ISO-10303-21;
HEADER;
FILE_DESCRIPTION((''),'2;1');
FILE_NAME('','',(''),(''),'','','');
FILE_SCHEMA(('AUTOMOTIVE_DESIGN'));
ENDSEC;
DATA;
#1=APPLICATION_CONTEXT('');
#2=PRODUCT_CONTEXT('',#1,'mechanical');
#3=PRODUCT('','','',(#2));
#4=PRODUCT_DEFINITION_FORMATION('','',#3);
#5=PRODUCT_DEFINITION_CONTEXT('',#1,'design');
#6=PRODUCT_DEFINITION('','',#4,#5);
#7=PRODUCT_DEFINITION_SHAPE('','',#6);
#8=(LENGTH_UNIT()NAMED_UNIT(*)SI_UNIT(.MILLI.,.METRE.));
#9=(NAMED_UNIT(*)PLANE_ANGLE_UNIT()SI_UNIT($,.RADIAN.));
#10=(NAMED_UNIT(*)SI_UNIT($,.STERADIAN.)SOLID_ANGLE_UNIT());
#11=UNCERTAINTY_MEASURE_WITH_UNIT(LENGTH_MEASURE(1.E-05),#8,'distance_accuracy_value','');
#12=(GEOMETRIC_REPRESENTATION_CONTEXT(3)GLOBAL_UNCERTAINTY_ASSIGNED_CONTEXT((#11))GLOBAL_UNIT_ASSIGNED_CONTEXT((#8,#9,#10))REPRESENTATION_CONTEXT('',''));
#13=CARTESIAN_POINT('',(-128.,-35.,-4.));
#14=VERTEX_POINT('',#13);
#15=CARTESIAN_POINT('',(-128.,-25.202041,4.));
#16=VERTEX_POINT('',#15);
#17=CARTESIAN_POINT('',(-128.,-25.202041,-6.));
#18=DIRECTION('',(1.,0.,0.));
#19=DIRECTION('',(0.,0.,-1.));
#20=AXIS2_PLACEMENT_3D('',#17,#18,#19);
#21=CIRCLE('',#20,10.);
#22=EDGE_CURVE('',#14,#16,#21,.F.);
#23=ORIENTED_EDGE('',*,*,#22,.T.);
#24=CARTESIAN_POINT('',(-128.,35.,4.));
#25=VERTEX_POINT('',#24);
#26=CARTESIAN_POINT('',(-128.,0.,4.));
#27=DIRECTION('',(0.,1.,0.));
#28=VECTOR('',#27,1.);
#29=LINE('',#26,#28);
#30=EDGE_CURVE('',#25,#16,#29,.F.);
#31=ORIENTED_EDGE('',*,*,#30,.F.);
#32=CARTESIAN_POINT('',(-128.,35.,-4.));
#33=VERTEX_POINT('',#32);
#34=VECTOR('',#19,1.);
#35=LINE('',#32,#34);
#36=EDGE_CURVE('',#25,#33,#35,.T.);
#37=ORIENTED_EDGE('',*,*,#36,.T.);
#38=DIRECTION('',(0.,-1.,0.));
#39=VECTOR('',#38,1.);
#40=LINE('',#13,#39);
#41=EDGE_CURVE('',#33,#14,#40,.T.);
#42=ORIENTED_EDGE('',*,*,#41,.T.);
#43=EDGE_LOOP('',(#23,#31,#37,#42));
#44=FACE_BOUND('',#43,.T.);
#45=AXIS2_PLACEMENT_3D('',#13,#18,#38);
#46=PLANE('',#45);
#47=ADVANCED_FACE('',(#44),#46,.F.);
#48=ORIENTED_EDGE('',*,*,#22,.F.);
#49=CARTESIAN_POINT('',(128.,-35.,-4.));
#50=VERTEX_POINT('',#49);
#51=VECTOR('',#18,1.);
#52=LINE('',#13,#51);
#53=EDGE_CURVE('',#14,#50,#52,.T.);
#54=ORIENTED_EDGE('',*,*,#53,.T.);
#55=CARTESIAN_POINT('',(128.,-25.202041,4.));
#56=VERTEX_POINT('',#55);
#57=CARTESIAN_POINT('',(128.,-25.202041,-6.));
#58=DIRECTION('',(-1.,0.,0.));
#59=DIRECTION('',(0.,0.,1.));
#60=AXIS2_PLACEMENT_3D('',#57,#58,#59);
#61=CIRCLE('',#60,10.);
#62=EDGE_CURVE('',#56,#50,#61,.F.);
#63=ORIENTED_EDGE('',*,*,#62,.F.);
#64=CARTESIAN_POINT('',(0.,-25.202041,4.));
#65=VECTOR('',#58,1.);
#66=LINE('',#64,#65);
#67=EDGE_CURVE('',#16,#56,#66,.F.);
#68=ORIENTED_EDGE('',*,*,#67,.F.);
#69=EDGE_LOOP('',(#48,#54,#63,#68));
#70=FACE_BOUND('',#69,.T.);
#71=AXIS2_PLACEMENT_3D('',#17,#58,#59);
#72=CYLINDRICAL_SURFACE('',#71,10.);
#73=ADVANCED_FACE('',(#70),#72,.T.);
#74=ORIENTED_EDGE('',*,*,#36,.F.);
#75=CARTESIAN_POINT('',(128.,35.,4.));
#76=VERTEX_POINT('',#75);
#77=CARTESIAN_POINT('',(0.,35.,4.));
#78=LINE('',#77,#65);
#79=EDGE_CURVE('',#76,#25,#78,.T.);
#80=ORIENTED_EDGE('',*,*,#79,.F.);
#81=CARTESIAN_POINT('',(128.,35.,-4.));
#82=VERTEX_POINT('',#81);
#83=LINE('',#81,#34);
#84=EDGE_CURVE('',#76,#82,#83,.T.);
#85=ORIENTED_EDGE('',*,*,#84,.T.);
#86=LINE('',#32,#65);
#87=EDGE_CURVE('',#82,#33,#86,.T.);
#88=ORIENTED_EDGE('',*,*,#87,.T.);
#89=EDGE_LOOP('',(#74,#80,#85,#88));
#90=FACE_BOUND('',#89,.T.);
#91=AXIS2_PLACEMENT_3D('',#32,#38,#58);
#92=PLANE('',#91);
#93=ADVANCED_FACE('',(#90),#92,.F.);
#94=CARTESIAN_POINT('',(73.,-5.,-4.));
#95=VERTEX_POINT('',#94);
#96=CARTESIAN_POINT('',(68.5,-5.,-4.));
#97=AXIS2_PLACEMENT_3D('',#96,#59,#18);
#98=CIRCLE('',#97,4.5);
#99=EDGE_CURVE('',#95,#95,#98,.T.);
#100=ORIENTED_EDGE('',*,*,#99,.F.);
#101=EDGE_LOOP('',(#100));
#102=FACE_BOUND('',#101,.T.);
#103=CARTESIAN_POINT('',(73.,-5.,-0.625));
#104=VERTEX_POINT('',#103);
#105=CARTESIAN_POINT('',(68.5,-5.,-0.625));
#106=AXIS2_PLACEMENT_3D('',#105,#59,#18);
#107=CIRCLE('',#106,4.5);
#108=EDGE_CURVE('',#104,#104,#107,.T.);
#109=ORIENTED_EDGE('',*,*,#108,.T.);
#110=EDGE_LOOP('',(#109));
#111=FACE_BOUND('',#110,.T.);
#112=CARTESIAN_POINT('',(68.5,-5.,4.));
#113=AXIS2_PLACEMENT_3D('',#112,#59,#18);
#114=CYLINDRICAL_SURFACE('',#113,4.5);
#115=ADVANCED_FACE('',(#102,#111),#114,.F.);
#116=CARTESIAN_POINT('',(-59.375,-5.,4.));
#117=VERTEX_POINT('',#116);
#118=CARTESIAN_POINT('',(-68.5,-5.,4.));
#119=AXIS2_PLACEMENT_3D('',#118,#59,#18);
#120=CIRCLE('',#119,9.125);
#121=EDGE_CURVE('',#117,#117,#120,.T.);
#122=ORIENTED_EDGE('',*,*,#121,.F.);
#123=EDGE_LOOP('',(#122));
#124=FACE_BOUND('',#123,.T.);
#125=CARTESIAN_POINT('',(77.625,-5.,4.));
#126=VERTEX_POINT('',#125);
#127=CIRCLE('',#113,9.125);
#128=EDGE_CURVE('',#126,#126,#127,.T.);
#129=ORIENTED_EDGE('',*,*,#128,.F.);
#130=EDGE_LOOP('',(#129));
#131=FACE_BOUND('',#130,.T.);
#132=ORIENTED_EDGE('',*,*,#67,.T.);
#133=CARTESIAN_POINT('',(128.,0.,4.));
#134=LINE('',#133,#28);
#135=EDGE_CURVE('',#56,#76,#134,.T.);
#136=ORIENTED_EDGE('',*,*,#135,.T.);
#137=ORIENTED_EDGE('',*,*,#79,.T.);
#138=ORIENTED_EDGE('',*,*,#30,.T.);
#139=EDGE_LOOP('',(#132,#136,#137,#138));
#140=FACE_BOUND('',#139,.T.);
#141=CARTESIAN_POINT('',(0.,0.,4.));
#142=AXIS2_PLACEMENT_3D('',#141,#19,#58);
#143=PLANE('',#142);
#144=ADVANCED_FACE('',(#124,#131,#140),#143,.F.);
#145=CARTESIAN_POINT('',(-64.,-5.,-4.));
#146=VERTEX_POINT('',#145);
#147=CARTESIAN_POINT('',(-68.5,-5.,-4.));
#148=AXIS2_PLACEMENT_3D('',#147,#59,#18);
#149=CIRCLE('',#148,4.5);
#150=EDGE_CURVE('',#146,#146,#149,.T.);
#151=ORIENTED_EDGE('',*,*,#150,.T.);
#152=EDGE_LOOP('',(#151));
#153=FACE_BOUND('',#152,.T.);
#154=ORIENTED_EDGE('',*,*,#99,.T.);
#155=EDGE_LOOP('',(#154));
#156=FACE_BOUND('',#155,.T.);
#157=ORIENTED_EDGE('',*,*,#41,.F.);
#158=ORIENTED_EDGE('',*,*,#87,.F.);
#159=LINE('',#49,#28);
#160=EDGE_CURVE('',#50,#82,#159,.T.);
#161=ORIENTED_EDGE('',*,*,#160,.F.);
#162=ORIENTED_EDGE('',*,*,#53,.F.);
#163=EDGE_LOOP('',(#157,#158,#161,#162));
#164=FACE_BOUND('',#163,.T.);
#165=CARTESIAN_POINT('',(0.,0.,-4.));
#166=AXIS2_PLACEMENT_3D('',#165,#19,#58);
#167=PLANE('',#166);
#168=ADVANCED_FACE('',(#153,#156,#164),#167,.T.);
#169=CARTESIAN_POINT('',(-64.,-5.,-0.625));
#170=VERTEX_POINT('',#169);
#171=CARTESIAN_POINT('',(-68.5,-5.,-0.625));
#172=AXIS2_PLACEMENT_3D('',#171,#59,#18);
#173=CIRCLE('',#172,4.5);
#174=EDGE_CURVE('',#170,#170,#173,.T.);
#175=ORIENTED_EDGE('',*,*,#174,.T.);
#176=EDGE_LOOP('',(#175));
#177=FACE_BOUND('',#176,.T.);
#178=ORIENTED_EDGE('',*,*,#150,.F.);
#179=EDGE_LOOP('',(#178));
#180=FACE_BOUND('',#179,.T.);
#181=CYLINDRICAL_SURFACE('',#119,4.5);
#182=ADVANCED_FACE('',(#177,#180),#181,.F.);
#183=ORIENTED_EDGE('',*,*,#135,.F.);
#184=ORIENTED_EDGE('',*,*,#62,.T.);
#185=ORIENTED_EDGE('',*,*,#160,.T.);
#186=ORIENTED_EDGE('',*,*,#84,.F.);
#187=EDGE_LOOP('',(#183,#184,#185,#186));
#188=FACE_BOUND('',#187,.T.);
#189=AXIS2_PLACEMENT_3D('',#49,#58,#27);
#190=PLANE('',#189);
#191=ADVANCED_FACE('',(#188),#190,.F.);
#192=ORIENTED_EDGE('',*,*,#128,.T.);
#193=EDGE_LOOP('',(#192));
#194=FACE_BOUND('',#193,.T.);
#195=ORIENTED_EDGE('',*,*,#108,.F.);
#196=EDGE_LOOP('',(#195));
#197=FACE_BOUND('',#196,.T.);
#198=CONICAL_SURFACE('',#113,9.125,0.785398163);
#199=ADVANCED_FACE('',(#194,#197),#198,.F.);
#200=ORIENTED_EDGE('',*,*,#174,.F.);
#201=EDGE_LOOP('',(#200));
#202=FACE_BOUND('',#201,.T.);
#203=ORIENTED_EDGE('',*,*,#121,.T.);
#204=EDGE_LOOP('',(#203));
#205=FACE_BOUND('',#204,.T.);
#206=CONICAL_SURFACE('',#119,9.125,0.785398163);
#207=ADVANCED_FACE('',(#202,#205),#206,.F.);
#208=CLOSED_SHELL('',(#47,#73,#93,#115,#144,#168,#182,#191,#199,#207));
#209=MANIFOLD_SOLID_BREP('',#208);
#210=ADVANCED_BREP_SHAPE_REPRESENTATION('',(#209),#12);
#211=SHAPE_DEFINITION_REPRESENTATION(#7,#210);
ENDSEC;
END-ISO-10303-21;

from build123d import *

# Parameters (mm, degrees)
SKETCH_1_W          = 256
SKETCH_1_H          = 70
EXTRUDE_1_DEPTH     = 4
FILLET_1_R          = 10
SHEET_START         = -128
SHEET_METAL_1_DEPTH = 256
FILLET_2_R          = 10


# Read off the part's stored shape, not the designer's step: Преобразовать-Твердое тело1
with BuildPart() as part:
    # Sketch 1 → Бобышка-Вытянуть1 (new, symmetric)
    with BuildSketch(Plane.XY):
        Rectangle(SKETCH_1_W, SKETCH_1_H)
    extrude(amount=EXTRUDE_1_DEPTH, both=True)

    # Скругление1
    # the kernel refuses this fillet: 10 mm, written as the material it takes off along each edge
    with BuildSketch(Plane(origin=(-152.494897428, -35, 4), x_dir=(0, 0, -1), z_dir=(1, 0, 0))) as fillet_1_piece_1:
        with BuildLine():
            CenterArc((10, 9.797958971), FILLET_1_R, 180, 78.463040967)
            Line((0, 9.797958971), (-0.2, 9.797958971))
            Line((-0.2, 9.797958971), (-0.2, 0))
            Line((-0.2, 0), (0, -0.2))
            ThreePointArc((0, -0.2), (4, -0.2), (7.96, -0.195959179))
            Line((7.96, -0.195959179), (8, 0))
        make_face()
    extrude(amount=304.989794856, mode=Mode.SUBTRACT)

    # Sheet Metal 1 outline → Sheet Metal 1 (add)
    with BuildSketch(Plane.YZ.offset(SHEET_START)):
        with BuildLine():
            Line((-35, 4), (-35, -4))
            ThreePointArc((-35, -4), (-31.526596349, 1.745966692), (-25.202041029, 4))
            Line((-25.202041029, 4), (-35, 4))
        make_face()
    extrude(amount=SHEET_METAL_1_DEPTH)

    # Скругление2
    # the kernel refuses this fillet: 10 mm, written as the material it takes off along each edge
    with BuildSketch(Plane(origin=(-152.494897428, -35, 4), x_dir=(0, 1, 0), z_dir=(1, 0, 0))) as fillet_2_piece_1:
        with BuildLine():
            CenterArc((9.797958971, -10), FILLET_2_R, 90, 78.463040967)
            Line((0, -8), (-0.195959179, -7.96))
            ThreePointArc((-0.195959179, -7.96), (-0.2, -4), (-0.2, 0))
            Line((-0.2, 0), (0, 0.2))
            Line((0, 0.2), (9.797958971, 0.2))
            Line((9.797958971, 0.2), (9.797958971, 0))
        make_face()
    extrude(amount=304.989794856, mode=Mode.SUBTRACT)

    # Эскиз8 → Зенковка для винта с потайной головкой M81 (revolve, cut)
    with BuildSketch(Plane(origin=(-68.5, -5, 4), x_dir=(0, -1, 0), z_dir=(1, 0, 0))):
        Polygon((0, 0), (0, 8), (4.5, 8), (4.5, 4.625), (9.125, 0), align=None)
    hole_wizard_m81 = revolve(axis=Axis((-68.5, -5, 10.35), (0, 0, -1)), mode=Mode.SUBTRACT)

    # Зеркальное отражение1: Зенковка для винта с потайной головкой M81 across plane
    add(hole_wizard_m81.mirror(Plane(origin=(0, 0, 0), x_dir=(0, 0, 1), z_dir=(1, 0, 0))), mode=Mode.SUBTRACT)


solid = part.part
